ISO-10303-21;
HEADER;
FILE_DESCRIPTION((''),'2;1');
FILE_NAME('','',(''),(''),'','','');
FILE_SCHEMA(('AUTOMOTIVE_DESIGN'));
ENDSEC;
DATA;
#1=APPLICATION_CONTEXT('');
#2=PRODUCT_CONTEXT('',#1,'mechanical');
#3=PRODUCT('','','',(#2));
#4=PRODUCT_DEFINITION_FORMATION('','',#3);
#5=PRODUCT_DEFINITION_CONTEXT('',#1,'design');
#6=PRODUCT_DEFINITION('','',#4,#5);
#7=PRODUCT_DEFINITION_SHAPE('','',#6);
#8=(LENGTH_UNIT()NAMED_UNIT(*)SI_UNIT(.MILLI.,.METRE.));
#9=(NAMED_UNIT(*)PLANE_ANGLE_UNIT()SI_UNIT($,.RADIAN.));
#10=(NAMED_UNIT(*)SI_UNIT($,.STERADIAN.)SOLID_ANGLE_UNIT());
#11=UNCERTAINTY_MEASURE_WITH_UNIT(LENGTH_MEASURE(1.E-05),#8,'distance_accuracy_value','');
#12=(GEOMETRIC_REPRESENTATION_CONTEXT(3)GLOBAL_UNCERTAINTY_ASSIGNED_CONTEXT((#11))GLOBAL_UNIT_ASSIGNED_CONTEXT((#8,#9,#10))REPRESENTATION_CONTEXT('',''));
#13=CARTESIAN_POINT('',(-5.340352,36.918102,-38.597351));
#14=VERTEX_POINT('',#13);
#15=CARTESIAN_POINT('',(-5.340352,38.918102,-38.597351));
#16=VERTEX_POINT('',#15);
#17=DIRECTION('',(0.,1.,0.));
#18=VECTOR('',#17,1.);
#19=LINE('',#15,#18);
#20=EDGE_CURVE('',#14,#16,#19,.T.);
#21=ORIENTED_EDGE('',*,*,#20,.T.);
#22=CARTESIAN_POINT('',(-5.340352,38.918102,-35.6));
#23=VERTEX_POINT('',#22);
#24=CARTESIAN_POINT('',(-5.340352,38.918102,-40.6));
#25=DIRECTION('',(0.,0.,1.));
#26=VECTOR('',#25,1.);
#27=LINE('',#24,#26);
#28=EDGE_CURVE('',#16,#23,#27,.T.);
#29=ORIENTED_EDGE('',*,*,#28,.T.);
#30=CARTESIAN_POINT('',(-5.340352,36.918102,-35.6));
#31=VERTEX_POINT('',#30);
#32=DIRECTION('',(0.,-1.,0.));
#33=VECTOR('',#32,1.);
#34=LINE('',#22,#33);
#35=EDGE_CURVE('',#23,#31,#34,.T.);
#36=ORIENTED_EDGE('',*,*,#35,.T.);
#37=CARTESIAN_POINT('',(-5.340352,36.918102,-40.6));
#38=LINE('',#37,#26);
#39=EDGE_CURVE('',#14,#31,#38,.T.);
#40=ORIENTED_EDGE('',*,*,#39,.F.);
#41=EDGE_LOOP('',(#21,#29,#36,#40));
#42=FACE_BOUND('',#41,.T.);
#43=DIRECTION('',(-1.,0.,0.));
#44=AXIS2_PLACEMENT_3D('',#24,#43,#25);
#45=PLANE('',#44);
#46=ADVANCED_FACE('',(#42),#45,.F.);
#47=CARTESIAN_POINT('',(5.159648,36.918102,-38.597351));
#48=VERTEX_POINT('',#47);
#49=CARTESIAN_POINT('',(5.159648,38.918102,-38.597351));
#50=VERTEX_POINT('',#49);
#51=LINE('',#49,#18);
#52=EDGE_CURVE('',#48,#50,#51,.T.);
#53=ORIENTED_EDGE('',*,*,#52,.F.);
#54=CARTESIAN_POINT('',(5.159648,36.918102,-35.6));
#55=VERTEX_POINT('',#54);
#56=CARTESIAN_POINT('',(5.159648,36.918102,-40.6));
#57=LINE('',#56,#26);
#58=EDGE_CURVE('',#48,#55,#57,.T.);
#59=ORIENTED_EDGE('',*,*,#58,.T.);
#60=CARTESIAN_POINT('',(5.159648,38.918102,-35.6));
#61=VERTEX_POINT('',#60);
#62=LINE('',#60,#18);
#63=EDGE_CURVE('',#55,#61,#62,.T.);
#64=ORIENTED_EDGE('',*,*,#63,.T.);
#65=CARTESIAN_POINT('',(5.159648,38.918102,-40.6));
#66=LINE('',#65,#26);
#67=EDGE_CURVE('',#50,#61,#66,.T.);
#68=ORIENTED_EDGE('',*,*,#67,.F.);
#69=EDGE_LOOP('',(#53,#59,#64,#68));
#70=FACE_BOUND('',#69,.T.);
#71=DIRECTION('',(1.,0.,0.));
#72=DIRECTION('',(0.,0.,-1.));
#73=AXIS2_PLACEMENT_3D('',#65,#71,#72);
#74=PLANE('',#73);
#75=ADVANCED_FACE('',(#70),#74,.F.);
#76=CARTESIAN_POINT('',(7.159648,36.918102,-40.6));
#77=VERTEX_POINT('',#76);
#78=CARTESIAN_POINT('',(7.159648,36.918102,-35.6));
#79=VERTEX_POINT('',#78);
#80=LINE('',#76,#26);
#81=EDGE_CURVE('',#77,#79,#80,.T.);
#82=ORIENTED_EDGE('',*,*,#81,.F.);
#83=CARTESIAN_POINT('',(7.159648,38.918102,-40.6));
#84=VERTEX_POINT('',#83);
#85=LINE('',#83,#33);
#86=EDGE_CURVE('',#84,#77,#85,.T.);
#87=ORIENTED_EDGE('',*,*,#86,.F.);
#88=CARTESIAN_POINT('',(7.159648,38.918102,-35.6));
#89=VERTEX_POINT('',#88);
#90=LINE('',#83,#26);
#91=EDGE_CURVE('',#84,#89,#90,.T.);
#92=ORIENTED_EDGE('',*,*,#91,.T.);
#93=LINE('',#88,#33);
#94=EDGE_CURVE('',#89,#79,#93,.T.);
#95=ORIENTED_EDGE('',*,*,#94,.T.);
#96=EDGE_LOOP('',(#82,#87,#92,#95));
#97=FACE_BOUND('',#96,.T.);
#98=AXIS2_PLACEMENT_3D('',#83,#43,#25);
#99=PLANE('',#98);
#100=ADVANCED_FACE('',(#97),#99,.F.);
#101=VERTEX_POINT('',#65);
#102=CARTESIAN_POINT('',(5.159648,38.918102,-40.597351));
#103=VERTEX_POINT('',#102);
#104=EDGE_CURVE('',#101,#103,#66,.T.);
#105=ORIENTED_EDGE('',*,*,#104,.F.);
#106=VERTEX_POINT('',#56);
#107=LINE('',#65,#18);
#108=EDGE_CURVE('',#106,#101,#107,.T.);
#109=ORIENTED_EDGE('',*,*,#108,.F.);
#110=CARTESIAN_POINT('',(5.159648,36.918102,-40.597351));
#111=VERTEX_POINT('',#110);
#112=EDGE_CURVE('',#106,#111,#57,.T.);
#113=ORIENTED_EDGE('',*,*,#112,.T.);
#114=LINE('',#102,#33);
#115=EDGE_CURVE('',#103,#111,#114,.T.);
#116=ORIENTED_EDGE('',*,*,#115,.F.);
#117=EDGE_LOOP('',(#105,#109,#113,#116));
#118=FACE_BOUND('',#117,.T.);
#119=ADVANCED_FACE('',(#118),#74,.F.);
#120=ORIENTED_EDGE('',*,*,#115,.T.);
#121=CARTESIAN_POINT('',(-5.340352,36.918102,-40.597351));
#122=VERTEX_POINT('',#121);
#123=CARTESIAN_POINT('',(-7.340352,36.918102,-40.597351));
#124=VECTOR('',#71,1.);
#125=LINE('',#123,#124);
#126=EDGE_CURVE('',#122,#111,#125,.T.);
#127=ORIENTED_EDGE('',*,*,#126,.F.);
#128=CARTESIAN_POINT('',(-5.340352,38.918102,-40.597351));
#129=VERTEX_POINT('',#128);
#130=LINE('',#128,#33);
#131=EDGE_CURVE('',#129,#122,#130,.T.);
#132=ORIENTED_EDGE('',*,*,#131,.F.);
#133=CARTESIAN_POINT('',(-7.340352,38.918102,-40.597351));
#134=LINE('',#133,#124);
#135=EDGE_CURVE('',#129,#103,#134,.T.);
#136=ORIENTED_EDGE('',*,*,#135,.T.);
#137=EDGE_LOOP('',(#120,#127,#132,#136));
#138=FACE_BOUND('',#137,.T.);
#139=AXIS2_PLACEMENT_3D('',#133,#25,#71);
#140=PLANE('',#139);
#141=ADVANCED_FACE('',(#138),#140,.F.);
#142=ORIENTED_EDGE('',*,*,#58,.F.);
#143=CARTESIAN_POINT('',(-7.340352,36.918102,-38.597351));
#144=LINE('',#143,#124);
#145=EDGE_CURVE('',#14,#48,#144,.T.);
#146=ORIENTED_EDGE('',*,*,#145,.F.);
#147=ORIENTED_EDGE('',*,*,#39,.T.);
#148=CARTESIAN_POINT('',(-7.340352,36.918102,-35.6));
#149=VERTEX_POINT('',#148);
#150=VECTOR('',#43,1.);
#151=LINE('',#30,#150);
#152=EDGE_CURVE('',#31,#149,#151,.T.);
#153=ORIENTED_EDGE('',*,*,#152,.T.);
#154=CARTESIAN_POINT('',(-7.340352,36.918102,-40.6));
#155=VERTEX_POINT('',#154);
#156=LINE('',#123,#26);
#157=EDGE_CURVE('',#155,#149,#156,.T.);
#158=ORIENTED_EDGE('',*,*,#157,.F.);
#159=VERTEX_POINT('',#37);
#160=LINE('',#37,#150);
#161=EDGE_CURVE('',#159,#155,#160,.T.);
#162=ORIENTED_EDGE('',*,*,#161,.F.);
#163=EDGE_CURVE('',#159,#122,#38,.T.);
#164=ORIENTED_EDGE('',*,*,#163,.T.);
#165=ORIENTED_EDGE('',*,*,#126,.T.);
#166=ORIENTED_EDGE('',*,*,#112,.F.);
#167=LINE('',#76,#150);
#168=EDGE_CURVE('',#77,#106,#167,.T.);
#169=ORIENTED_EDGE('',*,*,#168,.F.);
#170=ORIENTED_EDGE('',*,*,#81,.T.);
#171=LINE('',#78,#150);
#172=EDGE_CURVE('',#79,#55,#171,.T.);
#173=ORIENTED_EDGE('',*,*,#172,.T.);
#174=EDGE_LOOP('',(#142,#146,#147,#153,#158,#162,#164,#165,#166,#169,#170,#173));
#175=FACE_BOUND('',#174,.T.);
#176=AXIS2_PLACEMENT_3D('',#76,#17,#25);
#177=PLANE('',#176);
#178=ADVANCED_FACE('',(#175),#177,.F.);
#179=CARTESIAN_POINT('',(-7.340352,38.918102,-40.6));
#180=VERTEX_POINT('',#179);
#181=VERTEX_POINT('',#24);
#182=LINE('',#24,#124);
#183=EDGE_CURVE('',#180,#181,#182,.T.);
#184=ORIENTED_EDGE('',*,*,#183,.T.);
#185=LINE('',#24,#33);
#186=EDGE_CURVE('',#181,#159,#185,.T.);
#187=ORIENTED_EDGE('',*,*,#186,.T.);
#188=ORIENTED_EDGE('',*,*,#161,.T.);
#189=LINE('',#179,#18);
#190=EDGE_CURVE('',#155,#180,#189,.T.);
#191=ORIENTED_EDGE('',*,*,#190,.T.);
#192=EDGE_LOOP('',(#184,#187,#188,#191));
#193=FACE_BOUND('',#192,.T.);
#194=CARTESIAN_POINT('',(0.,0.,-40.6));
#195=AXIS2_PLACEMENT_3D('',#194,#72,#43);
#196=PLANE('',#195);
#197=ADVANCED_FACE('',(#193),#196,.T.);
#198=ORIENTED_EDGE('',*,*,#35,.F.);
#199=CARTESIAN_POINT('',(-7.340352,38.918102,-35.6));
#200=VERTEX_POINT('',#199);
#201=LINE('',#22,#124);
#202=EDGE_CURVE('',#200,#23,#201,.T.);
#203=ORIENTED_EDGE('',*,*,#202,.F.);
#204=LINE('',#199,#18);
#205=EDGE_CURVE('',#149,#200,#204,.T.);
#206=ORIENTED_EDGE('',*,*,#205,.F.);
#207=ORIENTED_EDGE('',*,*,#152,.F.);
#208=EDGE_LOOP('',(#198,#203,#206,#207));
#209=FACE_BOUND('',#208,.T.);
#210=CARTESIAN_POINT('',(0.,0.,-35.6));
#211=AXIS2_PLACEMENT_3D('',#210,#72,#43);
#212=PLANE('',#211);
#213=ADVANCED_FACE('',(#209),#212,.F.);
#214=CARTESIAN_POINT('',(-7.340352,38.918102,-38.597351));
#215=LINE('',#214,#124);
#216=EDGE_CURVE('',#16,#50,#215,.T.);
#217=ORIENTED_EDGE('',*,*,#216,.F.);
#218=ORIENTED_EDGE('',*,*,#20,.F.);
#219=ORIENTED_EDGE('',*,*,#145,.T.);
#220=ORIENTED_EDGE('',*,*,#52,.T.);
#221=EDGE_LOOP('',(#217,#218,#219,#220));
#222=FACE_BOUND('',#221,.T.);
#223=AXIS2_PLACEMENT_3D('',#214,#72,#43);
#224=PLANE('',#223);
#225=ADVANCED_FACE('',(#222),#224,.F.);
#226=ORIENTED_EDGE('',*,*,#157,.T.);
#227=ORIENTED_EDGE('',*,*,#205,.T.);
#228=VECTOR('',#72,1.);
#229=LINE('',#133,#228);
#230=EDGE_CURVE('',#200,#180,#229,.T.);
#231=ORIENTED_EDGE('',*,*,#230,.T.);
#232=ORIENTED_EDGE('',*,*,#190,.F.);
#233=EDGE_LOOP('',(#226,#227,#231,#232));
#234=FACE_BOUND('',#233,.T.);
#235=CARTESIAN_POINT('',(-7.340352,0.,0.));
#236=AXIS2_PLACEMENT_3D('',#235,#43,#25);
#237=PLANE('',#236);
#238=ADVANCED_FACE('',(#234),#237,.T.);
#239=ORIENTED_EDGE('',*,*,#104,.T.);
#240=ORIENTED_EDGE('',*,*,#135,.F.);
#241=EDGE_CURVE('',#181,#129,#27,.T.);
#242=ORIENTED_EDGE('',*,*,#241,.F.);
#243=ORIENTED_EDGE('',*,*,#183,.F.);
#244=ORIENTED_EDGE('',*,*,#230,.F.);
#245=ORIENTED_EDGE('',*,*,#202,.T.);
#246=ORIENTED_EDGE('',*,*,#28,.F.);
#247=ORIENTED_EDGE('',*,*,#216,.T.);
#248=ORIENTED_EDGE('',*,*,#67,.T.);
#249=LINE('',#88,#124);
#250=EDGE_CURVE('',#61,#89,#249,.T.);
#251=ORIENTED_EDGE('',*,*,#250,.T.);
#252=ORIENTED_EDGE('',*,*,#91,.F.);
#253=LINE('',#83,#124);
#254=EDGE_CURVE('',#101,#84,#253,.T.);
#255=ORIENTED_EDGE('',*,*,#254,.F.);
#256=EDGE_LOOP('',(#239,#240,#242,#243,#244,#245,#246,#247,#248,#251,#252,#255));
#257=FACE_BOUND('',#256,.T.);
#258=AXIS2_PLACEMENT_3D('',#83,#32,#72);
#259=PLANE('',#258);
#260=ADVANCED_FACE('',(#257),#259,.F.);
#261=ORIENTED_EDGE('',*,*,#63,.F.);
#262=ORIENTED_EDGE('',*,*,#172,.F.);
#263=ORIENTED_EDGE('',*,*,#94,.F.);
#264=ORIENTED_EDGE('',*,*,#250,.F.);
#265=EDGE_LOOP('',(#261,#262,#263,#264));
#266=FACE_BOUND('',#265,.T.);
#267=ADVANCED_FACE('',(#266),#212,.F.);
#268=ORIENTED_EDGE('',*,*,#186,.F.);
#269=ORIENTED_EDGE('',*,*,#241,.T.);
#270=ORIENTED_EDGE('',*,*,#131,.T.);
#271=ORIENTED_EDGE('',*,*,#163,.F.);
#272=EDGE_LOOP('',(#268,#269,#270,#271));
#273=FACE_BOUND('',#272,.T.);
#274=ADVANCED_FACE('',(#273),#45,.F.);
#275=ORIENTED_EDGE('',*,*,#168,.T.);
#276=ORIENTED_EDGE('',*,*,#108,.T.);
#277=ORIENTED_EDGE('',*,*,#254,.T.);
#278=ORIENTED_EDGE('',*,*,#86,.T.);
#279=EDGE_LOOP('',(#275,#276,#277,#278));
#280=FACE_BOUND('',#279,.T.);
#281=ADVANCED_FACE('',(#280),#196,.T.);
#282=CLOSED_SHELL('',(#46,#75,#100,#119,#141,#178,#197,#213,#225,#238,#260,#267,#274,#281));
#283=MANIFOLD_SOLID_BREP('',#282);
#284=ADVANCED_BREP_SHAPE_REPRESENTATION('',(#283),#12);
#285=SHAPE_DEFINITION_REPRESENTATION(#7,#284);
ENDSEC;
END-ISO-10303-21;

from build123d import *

# Parameters (mm, degrees)
CUT_EXTRUDE1_DEPTH     = 5
CUT_EXTRUDE3_DEPTH     = 45
SKETCH8_R              = 40
CUT_EXTRUDE4_DEPTH     = 32
FILLET1_R              = 7
CUT_REVOLVE1_START     = 17
CUT_REVOLVE1_DEPTH     = 30.5
SKETCH18_W             = 13
SKETCH18_H             = 8
CUT_EXTRUDE13_DEPTH    = 5
SKETCH20_W             = 84
SKETCH20_H             = 7
CUT_EXTRUDE15_DEPTH    = 5
SKETCH19_R             = 1.5
CUT_EXTRUDE14_DEPTH    = 12
FILLET3_R              = 4
SKETCH21_W             = 16
SKETCH21_H             = 5
CUT_EXTRUDE16_DEPTH    = 5
CIRPATTERN1_COUNT      = 4
SKETCH22_W             = 5
SKETCH22_H             = 12
BOSS_EXTRUDE1_DEPTH    = 1.5
SKETCH23_W             = 5
SKETCH23_H             = 4.4
SKETCH23_H_2           = 4
BOSS_EXTRUDE2_DEPTH    = 17
SKETCH24_W             = 2
SKETCH24_H             = 3
BOSS_EXTRUDE3_DEPTH    = 2
CIRPATTERN2_COUNT      = 5
CUT_REVOLVE2_START     = 17
CUT_REVOLVE2_DEPTH     = 30.5
SKETCH29_W             = 16.2
SKETCH29_H             = 11.2
SKETCH29_W_2           = 13
SKETCH29_H_2           = 8
BOSS_EXTRUDE4_DEPTH    = 20
CUT_EXTRUDE18_DEPTH    = 12
SKETCH34_R             = 2.3
BOSS_EXTRUDE5_DEPTH    = 3.5
BOSS_EXTRUDE6_START    = 3.5
SKETCH35_R             = 2.3
BOSS_EXTRUDE6_DEPTH    = 3.5
SKETCH36_W             = 2
SKETCH36_H             = 2
BOSS_EXTRUDE7_DEPTH    = 5
SKETCH37_W             = 2
SKETCH37_H             = 2
BOSS_EXTRUDE8_DEPTH    = 12.5
SKETCH40_W             = 2
SKETCH40_H             = 2
BOSS_EXTRUDE9_DEPTH    = 5
INTERSECT7_START       = -43
INTERSECT7_OUTLINE_W   = 16.2
INTERSECT7_OUTLINE_H   = 20
INTERSECT7_OUTLINE_R   = 2.3
INTERSECT7_DEPTH       = 86
INTERSECT7_START_2     = -35.6
INTERSECT7_2_OUTLINE_W = 16.2
INTERSECT7_2_OUTLINE_H = 20
INTERSECT7_2_OUTLINE_R = 2.3
INTERSECT7_2_DEPTH     = 37.6


with BuildPart() as part:
    # Sketch1 → Revolve1 (revolve)
    with BuildSketch(Plane.XY, mode=Mode.PRIVATE) as revolve1_sk:
        with BuildLine():
            Line((37, 55), (0, 55))
            Line((0, 55), (0, 11.5))
            Line((0, 11.5), (22.5, 11.5))
            Line((22.5, 11.5), (22.5, 0))
            Line((22.5, 0), (25, 0))
            Line((25, 0), (25, 11.5))
            Line((25, 11.5), (42, 11.5))
            Line((42, 11.5), (42, 50))
            ThreePointArc((42, 50), (40.535533906, 53.535533906), (37, 55))
        make_face()
    revolve(revolve1_sk.sketch.rotate(Axis((0, 2, 0), (0, 1, 0)), 90), axis=Axis((0, 2, 0), (0, 1, 0)))

    # Sketch5 → Cut-Extrude1 (cut)
    with BuildSketch(Plane(origin=(0, 55, 0), x_dir=(1, 0, 0), z_dir=(0, 1, 0))):
        with BuildLine():
            Line((-42, 0), (-40, 0))
            Line((-40, 0), (40, 0))
            Line((40, 0), (42, 0))
            ThreePointArc((42, 0), (0, 42), (-42, 0))
        make_face()
    extrude(amount=-CUT_EXTRUDE1_DEPTH, mode=Mode.SUBTRACT)

    # Sketch7 → Cut-Extrude3 (cut)
    with BuildSketch(Plane.XZ.offset(-11.5)):
        with BuildLine():
            Line((21, 0), (-21, 0))
            ThreePointArc((-21, 0), (-18.277714988, -10.340461055), (-10.816653826, -18))
            Line((-10.816653826, -18), (10.816653826, -18))
            ThreePointArc((10.816653826, -18), (18.277714988, -10.340461055), (21, 0))
        make_face()
    extrude(amount=-CUT_EXTRUDE3_DEPTH, mode=Mode.SUBTRACT)

    # Sketch8 → Cut-Extrude4 (cut)
    with BuildSketch(Plane(origin=(0, 47.5, 0), x_dir=(1, 0, 0), z_dir=(0, 1, 0))):
        with Locations(Location((0, 0, 0), (0, 0, 270))):
            Circle(SKETCH8_R)
        with BuildLine():
            Line((22.912878475, -2), (-22.981606036, -2))
            ThreePointArc((-22.981606036, -2), (-20.067855169, 10.855581536), (-10.573881727, 20))
            Line((-10.573881727, 20), (10.505154166, 20))
            ThreePointArc((10.505154166, 20), (19.999127608, 10.855581536), (22.912878475, -2))
        make_face(mode=Mode.SUBTRACT)
    extrude(amount=-CUT_EXTRUDE4_DEPTH, mode=Mode.SUBTRACT)

    # Fillet1
    fillet1_edges = [part.edges().sort_by_distance(p)[0] for p in [
        (-21, 30.75, 0),
        (21, 30.75, 0),
    ]]
    fillet(fillet1_edges, radius=FILLET1_R)

    # Cut-Revolve1: read off the stored shape, not the designer's step
    # Cut-Revolve1 outline → Cut-Revolve1 (cut)
    with BuildSketch(Plane(origin=(0, 0, 0), x_dir=(1, 0, 0), z_dir=(0, 1, 0)).offset(CUT_REVOLVE1_START)):
        with BuildLine():
            Line((-34.641016151, -20), (-36.373066959, -21))
            ThreePointArc((-36.373066959, -21), (0, -42), (36.373066959, -21))
            Line((36.373066959, -21), (34.641016151, -20))
            ThreePointArc((34.641016151, -20), (0, -40), (-34.641016151, -20))
        make_face()
    extrude(amount=CUT_REVOLVE1_DEPTH, mode=Mode.SUBTRACT)

    # Sketch18 → Cut-Extrude13 (cut)
    with BuildSketch(Plane(origin=(0, 50, 0), x_dir=(1, 0, 0), z_dir=(0, 1, 0))):
        with Locations((0, 30)):
            Rectangle(SKETCH18_W, SKETCH18_H)
    extrude(amount=-CUT_EXTRUDE13_DEPTH, mode=Mode.SUBTRACT)

    # Sketch20 → Cut-Extrude15 (cut)
    with BuildSketch(Plane(origin=(0, 55, 0), x_dir=(1, 0, 0), z_dir=(0, 1, 0))):
        with Locations((0, -3.5)):
            Rectangle(SKETCH20_W, SKETCH20_H)
    extrude(amount=-CUT_EXTRUDE15_DEPTH, mode=Mode.SUBTRACT)

    # Sketch19 → Cut-Extrude14 (cut)
    with BuildSketch(Plane(origin=(0, 0, 7), x_dir=(-1, 0, 0), z_dir=(0, 0, -1))):
        with Locations((0, 52.5)):
            Circle(SKETCH19_R)
        with Locations((-29.412558482, 52.5)):
            Circle(SKETCH19_R)
        with Locations((29.412558482, 52.5)):
            Circle(SKETCH19_R)
    extrude(amount=-CUT_EXTRUDE14_DEPTH, mode=Mode.SUBTRACT)

    # Fillet3
    fillet3_edges = [part.edges().sort_by_distance(p)[0] for p in [
        (0, 11.5, 42),
    ]]
    fillet(fillet3_edges, radius=FILLET3_R)

    # Sketch21 → Cut-Extrude16 (cut)
    with BuildSketch(Plane(origin=(0, 15.5, 0), x_dir=(1, 0, 0), z_dir=(0, 1, 0))):
        with Locations((0, -29.5)):
            Rectangle(SKETCH21_W, SKETCH21_H)
    cut_extrude16 = extrude(amount=-CUT_EXTRUDE16_DEPTH, mode=Mode.SUBTRACT)

    # CirPattern1: Cut-Extrude16 ×4 about axis
    cirpattern1_axis = Axis((0, 0, 0), (0, 1, 0))
    for i in range(1, CIRPATTERN1_COUNT):
        add(cut_extrude16.rotate(cirpattern1_axis, i * 360 / CIRPATTERN1_COUNT), mode=Mode.SUBTRACT)

    # Sketch22 → Boss-Extrude1 (add)
    with BuildSketch(Plane(origin=(0, 15.5, 0), x_dir=(1, 0, 0), z_dir=(0, 1, 0))):
        with Locations((35.5, -4)):
            Rectangle(SKETCH22_W, SKETCH22_H)
    extrude(amount=BOSS_EXTRUDE1_DEPTH)

    # Sketch23 → Boss-Extrude2 (add)
    with BuildSketch(Plane(origin=(0, 17, 0), x_dir=(1, 0, 0), z_dir=(0, 1, 0))):
        with Locations((35.5, -0.2)):
            Rectangle(SKETCH23_W, SKETCH23_H)
        with Locations((35.5, -8)):
            Rectangle(SKETCH23_W, SKETCH23_H_2)
    extrude(amount=BOSS_EXTRUDE2_DEPTH)

    # Sketch24 → Boss-Extrude3 (add)
    with BuildSketch(Plane.XZ):
        with Locations((0, -22.5)):
            Rectangle(SKETCH24_W, SKETCH24_H)
    boss_extrude3 = extrude(amount=-BOSS_EXTRUDE3_DEPTH)

    # CirPattern2: Boss-Extrude3 ×5 about axis
    cirpattern2_axis = Axis((0, 0, 0), (0, 1, 0))
    for i in range(1, CIRPATTERN2_COUNT):
        add(boss_extrude3.rotate(cirpattern2_axis, i * 360 / CIRPATTERN2_COUNT))

    # Cut-Revolve2: read off the stored shape, not the designer's step
    # Cut-Revolve2 outline → Cut-Revolve2 (cut)
    with BuildSketch(Plane(origin=(0, 0, 0), x_dir=(1, 0, 0), z_dir=(0, 1, 0)).offset(CUT_REVOLVE2_START)):
        with BuildLine():
            ThreePointArc((-30.641777725, 25.711504387), (0, 40), (30.641777725, 25.711504387))
            Line((30.641777725, 25.711504387), (32.173866611, 26.997079607))
            ThreePointArc((32.173866611, 26.997079607), (0, 42), (-32.173866611, 26.997079607))
            Line((-32.173866611, 26.997079607), (-30.641777725, 25.711504387))
        make_face()
    extrude(amount=CUT_REVOLVE2_DEPTH, mode=Mode.SUBTRACT)

    # Sketch29 → Boss-Extrude4 (add)
    with BuildSketch(Plane.XZ.offset(-47.5)):
        with Locations((0, -30)):
            Rectangle(SKETCH29_W, SKETCH29_H)
        with Locations((0, -30)):
            Rectangle(SKETCH29_W_2, SKETCH29_H_2, mode=Mode.SUBTRACT)
    extrude(amount=BOSS_EXTRUDE4_DEPTH)

    # Sketch32 → Cut-Extrude18 (cut)
    with BuildSketch(Plane(origin=(0, 0, -35.6), x_dir=(-1, 0, 0), z_dir=(0, 0, -1))):
        with BuildLine():
            Line((-4.55, 40.24987133), (-4.55, 41.2))
            ThreePointArc((-4.55, 41.2), (-4.258194078, 41.946205288), (-3.537595761, 42.296506718))
            ThreePointArc((-3.537595761, 42.296506718), (0, 45.55), (3.537595761, 42.296506718))
            ThreePointArc((3.537595761, 42.296506718), (4.258194078, 41.946205288), (4.55, 41.2))
            Line((4.55, 41.2), (4.55, 40.675870248))
            ThreePointArc((4.55, 40.675870248), (4.010824187, 37.38705417), (2.4497454, 34.442558497))
            ThreePointArc((2.4497454, 34.442558497), (1.613339464, 32.35352404), (1.966232927, 30.131114075))
            ThreePointArc((1.966232927, 30.131114075), (1.891748397, 29.932488662), (1.693122984, 30.006973192))
            ThreePointArc((1.693122984, 30.006973192), (1.315208372, 32.386958334), (2.210917864, 34.624111266))
            ThreePointArc((2.210917864, 34.624111266), (3.726528337, 37.48284493), (4.25, 40.675870248))
            Line((4.25, 40.675870248), (4.25, 41.2))
            ThreePointArc((4.25, 41.2), (4.015685425, 41.765685425), (3.45, 42))
            Line((3.45, 42), (3.25, 42))
            ThreePointArc((3.25, 42), (0, 45.25), (-3.25, 42))
            Line((-3.25, 42), (-3.45, 42))
            ThreePointArc((-3.45, 42), (-4.015685425, 41.765685425), (-4.25, 41.2))
            Line((-4.25, 41.2), (-4.25, 40.24987133))
            ThreePointArc((-4.25, 40.24987133), (-3.782078371, 37.22671372), (-2.422103613, 34.486476277))
            ThreePointArc((-2.422103613, 34.486476277), (-1.704952932, 32.326507722), (-2.304950317, 30.131109718))
            ThreePointArc((-2.304950317, 30.131109718), (-2.51173821, 30.0837941), (-2.559053827, 30.290581992))
            ThreePointArc((-2.559053827, 30.290581992), (-2.00484446, 32.318441057), (-2.667266721, 34.313574426))
            ThreePointArc((-2.667266721, 34.313574426), (-4.068040722, 37.136018992), (-4.55, 40.24987133))
        make_face()
    extrude(amount=-CUT_EXTRUDE18_DEPTH, mode=Mode.SUBTRACT)

    # Sketch34 → Boss-Extrude5 (add)
    with BuildSketch(Plane.XY.offset(-34)):
        with Locations(Location((0, 42, 0), (0, 0, 180))):
            Circle(SKETCH34_R)
    extrude(amount=BOSS_EXTRUDE5_DEPTH)

    # Sketch35 → Boss-Extrude6 (add)
    with BuildSketch(Plane(origin=(0, 0, -26), x_dir=(-1, 0, 0), z_dir=(0, 0, -1)).offset(BOSS_EXTRUDE6_START)):
        with Locations((0, 42)):
            Circle(SKETCH35_R)
    extrude(amount=-BOSS_EXTRUDE6_DEPTH)

    # Sketch36 → Boss-Extrude7 (add)
    with BuildSketch(Plane(origin=(0, 0, -35.6), x_dir=(-1, 0, 0), z_dir=(0, 0, -1))):
        with Locations((-6.159647943, 37.918102195)):
            Rectangle(SKETCH36_W, SKETCH36_H)
    extrude(amount=BOSS_EXTRUDE7_DEPTH)

    # Sketch37 → Boss-Extrude8 (add)
    with BuildSketch(Plane.ZY.offset(-5.159647943)):
        with Locations((-39.597351245, 37.918102195)):
            Rectangle(SKETCH37_W, SKETCH37_H)
    extrude(amount=BOSS_EXTRUDE8_DEPTH)

    # Sketch40 → Boss-Extrude9 (add)
    with BuildSketch(Plane(origin=(0, 0, -35.6), x_dir=(-1, 0, 0), z_dir=(0, 0, -1))):
        with Locations((6.340352057, 37.918102195)):
            Rectangle(SKETCH40_W, SKETCH40_H)
    extrude(amount=BOSS_EXTRUDE9_DEPTH)

    # Intersect7: read off the stored shape, not the designer's step
    # Intersect7 outline → Intersect7 (cut)
    # profile 1 of 2: a face of its own
    with BuildSketch(Plane.XY.offset(INTERSECT7_START)):
        Polygon((44, 55), (-44, 55), (-44, 11.5), (-27, 11.5), (-27, 0), (27, 0), (27, 11.5), (44, 11.5), align=None)
        with Locations((0, 37.5)):
            Rectangle(INTERSECT7_OUTLINE_W, INTERSECT7_OUTLINE_H, mode=Mode.SUBTRACT)
    # profile 2 of 2: a face of its own
    with BuildSketch(Plane.XY.offset(INTERSECT7_START)):
        with Locations((0, 42)):
            Circle(INTERSECT7_OUTLINE_R)
    extrude(amount=INTERSECT7_DEPTH, mode=Mode.SUBTRACT)

    # Intersect7 2 outline → Intersect7 2 (cut)
    with BuildSketch(Plane.XY.offset(INTERSECT7_START_2)):
        with Locations((0, 37.5)):
            Rectangle(INTERSECT7_2_OUTLINE_W, INTERSECT7_2_OUTLINE_H)
        with Locations((0, 42)):
            Circle(INTERSECT7_2_OUTLINE_R, mode=Mode.SUBTRACT)
    extrude(amount=INTERSECT7_2_DEPTH, mode=Mode.SUBTRACT)


solid = part.part
